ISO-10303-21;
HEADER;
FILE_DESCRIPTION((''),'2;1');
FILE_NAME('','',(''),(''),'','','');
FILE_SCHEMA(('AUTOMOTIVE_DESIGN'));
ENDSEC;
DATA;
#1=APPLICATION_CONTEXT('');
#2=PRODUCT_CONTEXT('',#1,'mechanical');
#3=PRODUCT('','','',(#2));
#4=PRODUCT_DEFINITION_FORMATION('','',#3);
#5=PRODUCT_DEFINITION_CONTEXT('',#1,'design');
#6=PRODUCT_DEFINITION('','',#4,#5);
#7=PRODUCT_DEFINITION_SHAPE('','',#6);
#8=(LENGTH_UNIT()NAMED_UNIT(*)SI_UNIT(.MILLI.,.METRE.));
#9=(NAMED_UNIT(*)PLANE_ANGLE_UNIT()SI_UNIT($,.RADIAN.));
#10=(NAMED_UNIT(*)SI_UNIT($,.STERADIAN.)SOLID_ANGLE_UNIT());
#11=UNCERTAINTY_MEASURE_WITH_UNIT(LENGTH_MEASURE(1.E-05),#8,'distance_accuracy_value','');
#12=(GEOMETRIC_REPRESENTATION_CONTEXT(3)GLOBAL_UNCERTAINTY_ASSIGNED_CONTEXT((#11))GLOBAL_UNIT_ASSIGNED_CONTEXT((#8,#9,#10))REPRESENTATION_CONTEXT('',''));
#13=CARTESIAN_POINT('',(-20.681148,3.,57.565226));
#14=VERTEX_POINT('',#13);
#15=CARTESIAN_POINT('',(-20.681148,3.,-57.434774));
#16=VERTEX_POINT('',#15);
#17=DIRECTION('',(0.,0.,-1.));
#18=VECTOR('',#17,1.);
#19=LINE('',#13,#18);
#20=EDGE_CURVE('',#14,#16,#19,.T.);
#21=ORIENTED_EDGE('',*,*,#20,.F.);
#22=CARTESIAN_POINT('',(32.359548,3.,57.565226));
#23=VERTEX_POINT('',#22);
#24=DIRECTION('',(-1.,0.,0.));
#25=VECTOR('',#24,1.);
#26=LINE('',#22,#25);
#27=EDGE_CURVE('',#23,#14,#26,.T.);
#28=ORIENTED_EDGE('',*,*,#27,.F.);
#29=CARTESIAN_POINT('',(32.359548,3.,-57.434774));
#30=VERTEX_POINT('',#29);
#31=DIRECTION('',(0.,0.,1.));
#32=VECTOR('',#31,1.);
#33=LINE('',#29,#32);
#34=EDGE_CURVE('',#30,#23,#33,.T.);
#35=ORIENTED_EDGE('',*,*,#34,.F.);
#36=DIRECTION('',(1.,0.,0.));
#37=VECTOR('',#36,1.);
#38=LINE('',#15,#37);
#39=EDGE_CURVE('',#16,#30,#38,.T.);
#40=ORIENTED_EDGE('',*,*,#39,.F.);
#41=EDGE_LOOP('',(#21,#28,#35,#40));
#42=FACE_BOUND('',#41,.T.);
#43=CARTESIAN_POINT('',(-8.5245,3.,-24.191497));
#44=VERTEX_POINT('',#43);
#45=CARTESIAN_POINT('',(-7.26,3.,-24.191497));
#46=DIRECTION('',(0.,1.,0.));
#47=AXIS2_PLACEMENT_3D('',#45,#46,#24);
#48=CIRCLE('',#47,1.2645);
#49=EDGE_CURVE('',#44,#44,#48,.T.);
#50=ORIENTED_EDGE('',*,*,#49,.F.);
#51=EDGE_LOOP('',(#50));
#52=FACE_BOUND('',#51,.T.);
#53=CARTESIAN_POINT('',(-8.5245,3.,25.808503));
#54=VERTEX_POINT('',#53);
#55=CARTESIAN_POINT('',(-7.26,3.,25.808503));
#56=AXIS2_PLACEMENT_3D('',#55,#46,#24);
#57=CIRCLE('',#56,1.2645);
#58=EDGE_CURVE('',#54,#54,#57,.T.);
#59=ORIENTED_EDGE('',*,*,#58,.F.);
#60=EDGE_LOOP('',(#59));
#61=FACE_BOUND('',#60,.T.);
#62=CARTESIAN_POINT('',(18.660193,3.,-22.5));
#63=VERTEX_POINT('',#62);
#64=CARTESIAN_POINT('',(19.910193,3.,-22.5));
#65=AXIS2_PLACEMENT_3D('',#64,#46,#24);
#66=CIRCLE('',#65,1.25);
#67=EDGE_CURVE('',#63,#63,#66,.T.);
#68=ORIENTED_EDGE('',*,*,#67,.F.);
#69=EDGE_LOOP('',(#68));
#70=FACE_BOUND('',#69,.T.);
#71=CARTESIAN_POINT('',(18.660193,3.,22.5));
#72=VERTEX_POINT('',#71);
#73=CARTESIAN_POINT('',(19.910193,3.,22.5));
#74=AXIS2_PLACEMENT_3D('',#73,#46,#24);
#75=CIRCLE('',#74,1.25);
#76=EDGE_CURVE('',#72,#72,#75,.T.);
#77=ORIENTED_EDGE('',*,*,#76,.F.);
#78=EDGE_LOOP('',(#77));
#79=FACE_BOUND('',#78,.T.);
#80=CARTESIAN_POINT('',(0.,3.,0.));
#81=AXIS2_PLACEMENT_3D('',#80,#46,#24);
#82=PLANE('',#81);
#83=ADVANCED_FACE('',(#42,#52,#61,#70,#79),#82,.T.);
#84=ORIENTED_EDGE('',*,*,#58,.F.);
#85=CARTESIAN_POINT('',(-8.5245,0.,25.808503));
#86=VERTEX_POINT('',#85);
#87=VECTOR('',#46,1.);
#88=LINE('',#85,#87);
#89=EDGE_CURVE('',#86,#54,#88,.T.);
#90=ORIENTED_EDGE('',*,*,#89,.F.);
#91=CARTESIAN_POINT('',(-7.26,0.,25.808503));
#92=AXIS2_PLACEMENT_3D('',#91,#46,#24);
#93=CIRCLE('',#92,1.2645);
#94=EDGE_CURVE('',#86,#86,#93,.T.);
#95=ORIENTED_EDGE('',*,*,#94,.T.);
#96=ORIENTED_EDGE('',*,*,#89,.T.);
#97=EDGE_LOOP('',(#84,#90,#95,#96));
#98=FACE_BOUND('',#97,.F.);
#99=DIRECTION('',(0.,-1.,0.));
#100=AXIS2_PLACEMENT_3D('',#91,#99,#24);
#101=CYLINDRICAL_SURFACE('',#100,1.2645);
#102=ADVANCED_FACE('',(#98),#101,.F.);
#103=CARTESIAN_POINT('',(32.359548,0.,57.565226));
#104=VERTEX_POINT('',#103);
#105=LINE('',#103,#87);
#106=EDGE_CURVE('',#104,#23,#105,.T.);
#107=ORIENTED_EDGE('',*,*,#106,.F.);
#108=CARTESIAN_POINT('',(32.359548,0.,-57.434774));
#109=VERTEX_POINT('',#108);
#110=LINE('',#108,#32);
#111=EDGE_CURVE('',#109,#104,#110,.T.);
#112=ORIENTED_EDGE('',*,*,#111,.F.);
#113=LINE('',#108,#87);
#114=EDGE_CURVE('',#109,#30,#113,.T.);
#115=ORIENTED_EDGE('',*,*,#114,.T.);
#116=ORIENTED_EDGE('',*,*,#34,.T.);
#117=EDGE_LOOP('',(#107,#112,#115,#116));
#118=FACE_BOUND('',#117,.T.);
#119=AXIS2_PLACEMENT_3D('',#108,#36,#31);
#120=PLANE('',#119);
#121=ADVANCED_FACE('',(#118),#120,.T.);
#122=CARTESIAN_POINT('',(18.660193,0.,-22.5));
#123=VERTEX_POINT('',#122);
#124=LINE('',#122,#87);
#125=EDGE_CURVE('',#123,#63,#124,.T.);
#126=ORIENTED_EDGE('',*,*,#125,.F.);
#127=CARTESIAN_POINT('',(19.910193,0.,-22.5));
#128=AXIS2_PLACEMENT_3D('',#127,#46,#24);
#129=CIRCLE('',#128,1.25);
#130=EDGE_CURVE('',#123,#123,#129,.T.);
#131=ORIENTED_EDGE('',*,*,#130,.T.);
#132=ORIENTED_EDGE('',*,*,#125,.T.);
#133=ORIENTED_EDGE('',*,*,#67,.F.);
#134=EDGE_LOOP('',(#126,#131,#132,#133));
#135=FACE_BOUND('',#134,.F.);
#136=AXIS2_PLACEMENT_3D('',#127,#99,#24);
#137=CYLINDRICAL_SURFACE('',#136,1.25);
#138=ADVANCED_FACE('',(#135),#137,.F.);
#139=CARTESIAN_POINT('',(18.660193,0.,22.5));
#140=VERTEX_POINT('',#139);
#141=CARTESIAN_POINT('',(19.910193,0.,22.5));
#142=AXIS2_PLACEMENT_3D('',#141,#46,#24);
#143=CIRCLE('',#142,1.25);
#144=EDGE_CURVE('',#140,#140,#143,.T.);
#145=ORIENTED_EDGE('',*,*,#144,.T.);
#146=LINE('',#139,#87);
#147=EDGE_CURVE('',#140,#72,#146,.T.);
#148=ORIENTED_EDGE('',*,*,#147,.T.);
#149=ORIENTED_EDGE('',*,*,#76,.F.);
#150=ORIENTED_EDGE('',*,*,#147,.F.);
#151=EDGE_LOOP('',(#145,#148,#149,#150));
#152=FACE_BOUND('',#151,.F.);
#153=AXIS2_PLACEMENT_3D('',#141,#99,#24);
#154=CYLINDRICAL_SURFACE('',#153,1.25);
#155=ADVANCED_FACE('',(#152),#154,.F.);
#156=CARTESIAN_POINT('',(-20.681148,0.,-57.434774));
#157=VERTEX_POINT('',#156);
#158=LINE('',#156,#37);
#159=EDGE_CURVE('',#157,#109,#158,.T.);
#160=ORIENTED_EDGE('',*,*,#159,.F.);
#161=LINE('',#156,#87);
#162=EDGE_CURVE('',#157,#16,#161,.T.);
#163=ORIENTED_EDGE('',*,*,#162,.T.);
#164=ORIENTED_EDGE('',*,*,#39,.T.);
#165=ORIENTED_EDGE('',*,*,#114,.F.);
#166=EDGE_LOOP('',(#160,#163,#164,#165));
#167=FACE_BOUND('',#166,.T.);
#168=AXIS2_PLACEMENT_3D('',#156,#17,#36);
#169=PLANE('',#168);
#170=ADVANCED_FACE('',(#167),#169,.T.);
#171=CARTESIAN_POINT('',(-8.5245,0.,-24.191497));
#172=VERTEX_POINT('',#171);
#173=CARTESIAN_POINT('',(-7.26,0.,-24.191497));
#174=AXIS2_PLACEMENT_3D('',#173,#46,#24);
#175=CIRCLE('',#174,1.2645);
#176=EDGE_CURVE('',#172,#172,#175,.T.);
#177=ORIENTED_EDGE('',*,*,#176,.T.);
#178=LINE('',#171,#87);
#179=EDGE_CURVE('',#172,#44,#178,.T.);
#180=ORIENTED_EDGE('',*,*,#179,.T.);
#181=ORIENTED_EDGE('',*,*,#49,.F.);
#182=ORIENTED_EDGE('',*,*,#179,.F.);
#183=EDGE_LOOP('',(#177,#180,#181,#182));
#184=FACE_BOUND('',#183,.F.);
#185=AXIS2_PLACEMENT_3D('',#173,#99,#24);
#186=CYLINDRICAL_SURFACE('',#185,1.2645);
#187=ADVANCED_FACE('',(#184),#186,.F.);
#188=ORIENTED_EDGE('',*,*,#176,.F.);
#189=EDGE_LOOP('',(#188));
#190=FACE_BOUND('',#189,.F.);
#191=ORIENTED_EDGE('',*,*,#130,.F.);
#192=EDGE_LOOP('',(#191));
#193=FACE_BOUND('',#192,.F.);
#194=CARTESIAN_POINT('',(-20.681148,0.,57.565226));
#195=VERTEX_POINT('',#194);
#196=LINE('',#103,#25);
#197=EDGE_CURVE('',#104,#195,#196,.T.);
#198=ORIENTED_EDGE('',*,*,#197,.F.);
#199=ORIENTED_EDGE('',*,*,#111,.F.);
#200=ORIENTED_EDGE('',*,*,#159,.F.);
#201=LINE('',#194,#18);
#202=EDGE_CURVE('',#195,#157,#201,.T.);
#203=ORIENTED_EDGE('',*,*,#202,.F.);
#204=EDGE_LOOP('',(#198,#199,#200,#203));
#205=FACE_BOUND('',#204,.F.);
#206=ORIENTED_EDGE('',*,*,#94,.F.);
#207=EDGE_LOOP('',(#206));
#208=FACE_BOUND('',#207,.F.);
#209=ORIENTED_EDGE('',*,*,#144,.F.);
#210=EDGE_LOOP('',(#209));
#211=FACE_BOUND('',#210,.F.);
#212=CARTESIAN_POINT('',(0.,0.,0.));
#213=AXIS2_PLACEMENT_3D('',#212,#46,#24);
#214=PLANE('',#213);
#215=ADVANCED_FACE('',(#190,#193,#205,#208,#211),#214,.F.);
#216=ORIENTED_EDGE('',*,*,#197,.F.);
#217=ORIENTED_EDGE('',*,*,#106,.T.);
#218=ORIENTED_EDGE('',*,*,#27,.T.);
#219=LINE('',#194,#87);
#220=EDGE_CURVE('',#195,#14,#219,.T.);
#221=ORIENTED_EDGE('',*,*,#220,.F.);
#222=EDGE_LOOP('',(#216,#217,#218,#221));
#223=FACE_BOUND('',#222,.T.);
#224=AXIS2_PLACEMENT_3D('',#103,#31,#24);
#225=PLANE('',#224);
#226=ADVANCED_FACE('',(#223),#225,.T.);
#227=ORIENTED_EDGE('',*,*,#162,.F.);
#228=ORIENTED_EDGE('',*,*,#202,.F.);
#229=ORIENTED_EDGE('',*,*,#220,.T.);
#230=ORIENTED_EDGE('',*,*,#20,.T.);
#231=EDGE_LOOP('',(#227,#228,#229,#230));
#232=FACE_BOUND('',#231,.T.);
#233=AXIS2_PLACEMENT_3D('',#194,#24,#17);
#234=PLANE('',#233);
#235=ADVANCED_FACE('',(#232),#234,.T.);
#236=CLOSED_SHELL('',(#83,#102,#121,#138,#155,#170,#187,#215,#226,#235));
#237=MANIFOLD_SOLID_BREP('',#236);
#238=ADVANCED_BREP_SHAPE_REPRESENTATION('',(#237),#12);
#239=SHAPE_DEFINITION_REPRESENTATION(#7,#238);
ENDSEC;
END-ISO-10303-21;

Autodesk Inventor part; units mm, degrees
ref_plane "YZ Plane" through (0, 0, 0) normal (1, 0, 0) x (0, 1, 0)
ref_plane "XZ Plane" through (0, 0, 0) normal (0, 1, 0) x (-1, 0, 0)
ref_plane "XY Plane" through (0, 0, 0) normal (0, 0, 1) x (1, 0, 0)
sketch "Sketch1" plane through (0, 0, 0) normal (0, 1, 0) x (-1, 0, 0)
  spline S0 degree 3 poles (-32.404854, -32.853236) (-32.408213, -32.73595) (-32.409911, -32.618547) (-32.409934, -32.501343) (-32.409955, -32.397684) (-32.409974, -32.293904) (-32.409993, -32.190169) (-32.410033, -31.969146) (-32.41007, -31.748122) (-32.410103, -31.527098) (-32.41017, -31.085051) (-32.410223, -30.643004) (-32.410266, -30.200957) (-32.410352, -29.316862) (-32.410395, -28.432768) (-32.410416, -27.548673) (-32.410444, -26.388246) (-32.410435, -25.228046) (-32.410446, -24.067555) (-32.410451, -23.45976) (-32.410462, -22.851867) (-32.410477, -22.244105) (-32.410527, -20.157589) (-32.410619, -18.070753) (-32.410664, -15.984323) (-32.410696, -14.53452) (-32.410704, -13.084832) (-32.410706, -11.63497) (-32.410708, -10.42824) (-32.410705, -9.226696) (-32.410708, -8.025862) (-32.410715, -5.363664) (-32.410749, -2.704993) (-32.410749, 0) (-32.410749, 2.70077) (-32.410715, 5.359553) (-32.410708, 8.025862) (-32.410707, 8.544603) (-32.410707, 9.06363) (-32.410707, 9.583301) (-32.410707, 11.716216) (-32.41071, 13.850051) (-32.410664, 15.984323) (-32.410606, 18.679415) (-32.41047, 21.375766) (-32.410446, 24.067555) (-32.410425, 26.312694) (-32.410471, 28.55511) (-32.410201, 30.801569) (-32.410148, 31.243615) (-32.410083, 31.685661) (-32.410004, 32.127707) (-32.409982, 32.252247) (-32.409959, 32.376902) (-32.409934, 32.501343) (-32.409915, 32.59775) (-32.408764, 32.694267) (-32.406487, 32.790697) (-32.401273, 33.0116) (-32.390165, 33.232367) (-32.373199, 33.452997) (-32.339266, 33.894259) (-32.28153, 34.337158) (-32.200857, 34.773898) (-32.120183, 35.210638) (-32.017096, 35.639812) (-31.892023, 36.061563) (-31.803491, 36.360098) (-31.703903, 36.654969) (-31.593121, 36.94617) (-31.39089, 37.477752) (-31.151562, 37.997105) (-30.875182, 38.502046) (-30.760914, 38.710811) (-30.641216, 38.915391) (-30.516203, 39.115805) (-30.173207, 39.665673) (-29.790661, 40.184302) (-29.36895, 40.672553) (-29.245622, 40.81534) (-29.118935, 40.95548) (-28.988811, 41.092954) (-28.815373, 41.276189) (-28.635833, 41.454691) (-28.450153, 41.628366) (-28.125165, 41.932343) (-27.784487, 42.218481) (-27.432415, 42.483881) (-27.308772, 42.577086) (-27.18357, 42.667861) (-27.056809, 42.756201) (-26.46167, 43.170951) (-25.83254, 43.532746) (-25.16884, 43.840615) (-25.051477, 43.895056) (-24.933051, 43.94777) (-24.813786, 43.998631) (-24.523994, 44.122212) (-24.22923, 44.2348) (-23.933007, 44.33546) (-23.514871, 44.477546) (-23.091358, 44.596955) (-22.662502, 44.693838) (-22.570374, 44.714651) (-22.477996, 44.734419) (-22.38537, 44.753136) (-22.046825, 44.821544) (-21.70496, 44.875937) (-21.359741, 44.916201) (-20.920071, 44.967482) (-20.473811, 44.995783) (-20.027865, 45) knots 0 0 0 0 0.00414579 0.00414579 0.00414579 0.0078125 0.0078125 0.0078125 0.015625 0.015625 0.015625 0.03125 0.03125 0.03125 0.0625 0.0625 0.0625 0.1035175 0.1035175 0.1035175 0.125 0.125 0.125 0.19875187 0.19875187 0.19875187 0.25 0.25 0.25 0.29265414 0.29265414 0.29265414 0.38721651 0.38721651 0.38721651 0.48163124 0.48163124 0.48163124 0.5 0.5 0.5 0.57539191 0.57539191 0.57539191 0.67059447 0.67059447 0.67059447 0.75 0.75 0.75 0.765625 0.765625 0.765625 0.77002712 0.77002712 0.77002712 0.7734375 0.7734375 0.7734375 0.78125 0.78125 0.78125 0.796875 0.796875 0.796875 0.8125 0.8125 0.8125 0.82356007 0.82356007 0.82356007 0.84375 0.84375 0.84375 0.85209742 0.85209742 0.85209742 0.875 0.875 0.875 0.88169776 0.88169776 0.88169776 0.890625 0.890625 0.890625 0.90625 0.90625 0.90625 0.91173731 0.91173731 0.91173731 0.9375 0.9375 0.9375 0.94205566 0.94205566 0.94205566 0.953125 0.953125 0.953125 0.96875 0.96875 0.96875 0.97210662 0.97210662 0.97210662 0.984375 0.984375 0.984375 1 1 1 1
  spline S1 degree 3 poles (-28.410193, 32.5) (-28.410193, 33.765572) (-28.133676, 34.931308) (-27.671254, 35.965522) (-27.208832, 36.999736) (-26.560504, 37.902428) (-25.780808, 38.647111) (-25.001113, 39.391795) (-24.090049, 39.97847) (-23.095481, 40.380521) (-22.100912, 40.782573) (-21.02284, 41) (-19.910193, 41) (-18.797545, 41) (-17.719473, 40.782573) (-16.724904, 40.380521) (-15.730336, 39.97847) (-14.819272, 39.391795) (-14.039577, 38.647111) (-13.259881, 37.902428) (-12.611553, 36.999736) (-12.149131, 35.965522) (-11.686709, 34.931308) (-11.410193, 33.765572) (-11.410193, 32.5) knots 0 0 0 0 0.125 0.125 0.125 0.25 0.25 0.25 0.375 0.375 0.375 0.5 0.5 0.5 0.625 0.625 0.625 0.75 0.75 0.75 0.875 0.875 0.875 1 1 1 1
  line L0 (-28.410193, -32.5) -> (-28.410193, 32.5)
  line L1 (-11.410193, 32.5) -> (-11.410193, -9.130692)
  line L2 (-11.410193, -9.130692) -> (-11.410193, -32.5)
  spline S2 degree 3 poles (-11.92122, -35.403236) (-11.99101, -35.594681) (-12.067149, -35.782168) (-12.149131, -35.965522) (-12.611553, -36.999736) (-13.259881, -37.902428) (-14.039577, -38.647111) (-14.819272, -39.391795) (-15.730336, -39.97847) (-16.724904, -40.380521) (-17.719473, -40.782573) (-18.797545, -41) (-19.910193, -41) (-21.02284, -41) (-22.100912, -40.782573) (-23.095481, -40.380521) (-24.090049, -39.97847) (-25.001113, -39.391795) (-25.780808, -38.647111) (-26.560504, -37.902428) (-27.208832, -36.999736) (-27.671254, -35.965522) (-27.753236, -35.782168) (-27.829375, -35.594681) (-27.899165, -35.403236) knots 0.102839 0.102839 0.102839 0.102839 0.125 0.125 0.125 0.25 0.25 0.25 0.375 0.375 0.375 0.5 0.5 0.5 0.625 0.625 0.625 0.75 0.75 0.75 0.875 0.875 0.875 0.897161 0.897161 0.897161 0.897161
  ellipse E0 centre (-27.409985, -30.903735) end of major axis (-43.224744, -27.538991) minor radius 11.659046 (-11.885471, -35.303236) -> (-11.410193, -32.5) ccw
  ellipse E1 centre (-12.410416, -30.903738) end of major axis (-28.225158, -34.268479) minor radius 11.659041 (-28.410193, -32.5) -> (-27.934914, -35.303236) ccw
  spline S3 degree 3 poles (-20.135916, -44.926171) (-20.902232, -44.912188) (-21.656156, -44.828474) (-22.39639, -44.67772) (-22.948546, -44.56527) (-23.493405, -44.415278) (-24.031365, -44.226793) (-24.310103, -44.129132) (-24.58603, -44.021306) (-24.856048, -43.904514) (-24.890974, -43.889408) (-24.925802, -43.874152) (-24.960525, -43.858751) (-25.263696, -43.724284) (-25.560172, -43.578241) (-25.850131, -43.420931) (-26.291576, -43.181437) (-26.717955, -42.915946) (-27.128881, -42.623661) (-27.257781, -42.531977) (-27.385148, -42.437641) (-27.510974, -42.340653) (-27.774451, -42.137563) (-28.031837, -41.922148) (-28.278086, -41.698847) (-28.524335, -41.475546) (-28.760531, -41.243618) (-28.986777, -41.003148) (-29.015281, -40.972852) (-29.043627, -40.942419) (-29.071813, -40.911851) (-29.491074, -40.457166) (-29.875526, -39.972573) (-30.22442, -39.457475) (-30.348377, -39.274468) (-30.468123, -39.087073) (-30.582688, -38.896485) (-30.640191, -38.800823) (-30.696393, -38.704359) (-30.751212, -38.60729) (-30.915247, -38.316831) (-31.066945, -38.021018) (-31.206902, -37.720112) (-31.358831, -37.393466) (-31.497133, -37.060343) (-31.621381, -36.721723) (-31.726048, -36.436468) (-31.82072, -36.147348) (-31.905041, -35.853236) knots 0 0 0 0 0.14319106 0.14319106 0.14319106 0.25 0.25 0.25 0.30534172 0.30534172 0.30534172 0.3125 0.3125 0.3125 0.375 0.375 0.375 0.47015259 0.47015259 0.47015259 0.5 0.5 0.5 0.5625 0.5625 0.5625 0.625 0.625 0.625 0.63287425 0.63287425 0.63287425 0.75 0.75 0.75 0.7916132 0.7916132 0.7916132 0.8125 0.8125 0.8125 0.875 0.875 0.875 0.94284614 0.94284614 0.94284614 1 1 1 1
  ellipse E2 centre (-27.409985, -30.903735) end of major axis (-43.224744, -27.538991) minor radius 11.659046 (-11.885471, -35.303236) -> (-11.410193, -32.5) ccw
  line L3 (-11.410193, -9.130692) -> (-11.410193, -32.5)
  line L4 (-11.410193, 32.5) -> (-11.410193, -9.130692)
  spline S4 degree 3 poles (-28.410193, 32.5) (-28.410193, 33.765572) (-28.133677, 34.931308) (-27.671254, 35.965522) (-27.208832, 36.999736) (-26.560504, 37.902428) (-25.780809, 38.647111) (-25.001113, 39.391795) (-24.090049, 39.97847) (-23.095481, 40.380521) (-22.100913, 40.782573) (-21.02284, 41) (-19.910193, 41) (-18.797545, 41) (-17.719473, 40.782573) (-16.724904, 40.380521) (-15.730336, 39.97847) (-14.819273, 39.391795) (-14.039577, 38.647111) (-13.259881, 37.902428) (-12.611553, 36.999736) (-12.149131, 35.965522) (-11.686709, 34.931308) (-11.410193, 33.765572) (-11.410193, 32.5) knots 0 0 0 0 0.125 0.125 0.125 0.25 0.25 0.25 0.375 0.375 0.375 0.5 0.5 0.5 0.625 0.625 0.625 0.75 0.75 0.75 0.875 0.875 0.875 1 1 1 1
  line L5 (-28.410193, -32.5) -> (-28.410193, 32.5)
  ellipse E3 centre (-12.410416, -30.903738) end of major axis (-28.225158, -34.268479) minor radius 11.659041 (-28.410193, -32.5) -> (-27.934914, -35.303236) ccw
  circle A0 centre (-19.910193, 22.5) radius 1.25
  circle A1 centre (-19.910193, -22.5) radius 1.25
  spline S5 degree 3 poles (-7.409638, -8.902626) (-7.409642, -11.263271) (-7.409635, -13.623588) (-7.409688, -15.984285) (-7.409726, -17.615445) (-7.409792, -19.246809) (-7.409843, -20.877933) (-7.409877, -21.941017) (-7.409905, -23.004462) (-7.409916, -24.06752) (-7.409926, -25.000298) (-7.409923, -25.932787) (-7.409937, -26.865587) (-7.409952, -27.863529) (-7.409987, -28.861472) (-7.410072, -29.859414) (-7.410115, -30.358385) (-7.410171, -30.857356) (-7.410243, -31.356327) (-7.410279, -31.605813) (-7.410319, -31.855298) (-7.410363, -32.104784) (-7.410387, -32.236971) (-7.410411, -32.369257) (-7.410437, -32.501339) (-7.410461, -32.618544) (-7.412158, -32.735941) (-7.415518, -32.853236) knots 0 0 0 0 0.29568906 0.29568906 0.29568906 0.5 0.5 0.5 0.6331595 0.6331595 0.6331595 0.75 0.75 0.75 0.875 0.875 0.875 0.9375 0.9375 0.9375 0.96875 0.96875 0.96875 0.98530746 0.98530746 0.98530746 1 1 1 1
  spline S6 degree 3 poles (-7.409638, -8.902626) (-7.398668, -9.006825) (-9.14047, -8.698904) (-11.410193, -9.130692) knots 0 0 0 0 1 1 1 1
  line L6 (-11.410193, -9.130692) -> (-11.410193, -32.5)
  ellipse E4 centre (-27.409985, -30.903735) end of major axis (-43.224744, -27.538991) minor radius 11.659046 (-11.885471, -35.303236) -> (-11.410193, -32.5) ccw
  line L7 (-11.885471, -35.303236) -> (-7.757702, -35.303236)
  spline S7 degree 3 poles (-7.757702, -35.303236) (-7.758844, -35.303236) (-7.761073, -35.30773) (-7.767821, -35.325968) (-7.772438, -35.340145) (-7.78659, -35.386369) (-7.797308, -35.423345) (-7.823066, -35.51376) (-7.838041, -35.566981) (-7.866767, -35.668696) (-7.879817, -35.714794) (-7.897842, -35.778081) (-7.902464, -35.794277) (-7.90927, -35.818079) (-7.911434, -35.825641) (-7.915514, -35.839882) (-7.917428, -35.846559) (-7.919345, -35.853236) knots 0 0 0 0 0.13804482 0.13804482 0.28388387 0.28388387 0.50004609 0.50004609 0.72328448 0.72328448 0.89210226 0.89210226 0.94966157 0.94966157 0.97641027 0.97641027 1 1 1 1
  spline S8 degree 3 poles (-7.919345, -35.853236) (-8.003152, -36.145286) (-8.097043, -36.431979) (-8.200582, -36.714498) (-8.328208, -37.062745) (-8.47045, -37.404583) (-8.626747, -37.739075) (-8.810346, -38.131998) (-9.013716, -38.515699) (-9.237855, -38.889015) (-9.35932, -39.09132) (-9.486915, -39.290583) (-9.620818, -39.486955) (-9.811316, -39.766324) (-10.014117, -40.038912) (-10.225707, -40.300477) (-10.393712, -40.508163) (-10.567792, -40.709695) (-10.747887, -40.905165) (-10.794607, -40.955875) (-10.841734, -41.006176) (-10.889261, -41.056069) (-11.350717, -41.540498) (-11.849576, -41.987112) (-12.386918, -42.394816) (-12.486805, -42.470605) (-12.588167, -42.545124) (-12.690734, -42.618124) (-12.864047, -42.741476) (-13.040808, -42.860477) (-13.219487, -42.974259) (-13.503909, -43.155378) (-13.7942, -43.324035) (-14.090213, -43.480544) (-14.376118, -43.631709) (-14.667362, -43.771537) (-14.964004, -43.8999) (-15.281618, -44.037338) (-15.605429, -44.161639) (-15.935451, -44.272737) (-16.254577, -44.380167) (-16.581053, -44.475594) (-16.9089, -44.557066) (-17.080253, -44.599649) (-17.251997, -44.638463) (-17.424125, -44.673526) (-17.581326, -44.705549) (-17.738847, -44.734442) (-17.896686, -44.760264) (-18.558021, -44.868455) (-19.224843, -44.923373) (-19.897251, -44.924079) (-19.901566, -44.924083) (-19.90588, -44.924086) (-19.910193, -44.924086) (-20.241963, -44.924086) (-20.576611, -44.910627) (-20.909693, -44.883796) (-21.247106, -44.856615) (-21.5813, -44.815961) (-21.912343, -44.762119) (-22.074408, -44.73576) (-22.235717, -44.706233) (-22.39627, -44.673528) (-22.891627, -44.572622) (-23.379775, -44.441685) (-23.860799, -44.280846) (-24.196316, -44.16866) (-24.529506, -44.041364) (-24.856421, -43.899904) (-25.150109, -43.772821) (-25.438729, -43.634322) (-25.719775, -43.486069) (-26.209658, -43.227655) (-26.679695, -42.938431) (-27.129738, -42.618131) (-27.225287, -42.550128) (-27.319927, -42.480713) (-27.41366, -42.409893) (-27.948886, -42.0055) (-28.458682, -41.551215) (-28.922894, -41.064862) (-28.973321, -41.01203) (-29.02324, -40.9588) (-29.072649, -40.905176) (-29.478082, -40.465148) (-29.849491, -39.998649) (-30.186959, -39.505722) (-30.324635, -39.304624) (-30.456615, -39.099116) (-30.58276, -38.889029) (-30.630057, -38.810259) (-30.676532, -38.730845) (-30.722184, -38.6508) (-30.889595, -38.357265) (-31.045877, -38.05518) (-31.189193, -37.749189) (-31.347794, -37.410564) (-31.491558, -37.065293) (-31.620128, -36.714515) (-31.723916, -36.431349) (-31.817776, -36.144633) (-31.901409, -35.853236) knots 0 0 0 0 0.02799367 0.02799367 0.02799367 0.0625 0.0625 0.0625 0.10303401 0.10303401 0.10303401 0.125 0.125 0.125 0.15625 0.15625 0.15625 0.18106293 0.18106293 0.18106293 0.1875 0.1875 0.1875 0.25 0.25 0.25 0.26161819 0.26161819 0.26161819 0.28125 0.28125 0.28125 0.3125 0.3125 0.3125 0.34268303 0.34268303 0.34268303 0.375 0.375 0.375 0.40625 0.40625 0.40625 0.42258324 0.42258324 0.42258324 0.4375 0.4375 0.4375 0.5 0.5 0.5 0.50040103 0.50040103 0.50040103 0.53125 0.53125 0.53125 0.5625 0.5625 0.5625 0.57779868 0.57779868 0.57779868 0.625 0.625 0.625 0.65792316 0.65792316 0.65792316 0.6875 0.6875 0.6875 0.7390545 0.7390545 0.7390545 0.75 0.75 0.75 0.8125 0.8125 0.8125 0.81928929 0.81928929 0.81928929 0.875 0.875 0.875 0.89772826 0.89772826 0.89772826 0.90625 0.90625 0.90625 0.9375 0.9375 0.9375 0.97208291 0.97208291 0.97208291 1 1 1 1
  spline S9 degree 3 poles (-31.901409, -35.853236) (-31.903324, -35.846565) (-31.905236, -35.839895) (-31.909312, -35.82567) (-31.911474, -35.818117) (-31.918271, -35.79435) (-31.922886, -35.778181) (-31.940872, -35.715036) (-31.953892, -35.669047) (-31.982604, -35.567376) (-31.997591, -35.514102) (-32.023361, -35.423609) (-32.034081, -35.386601) (-32.048248, -35.340272) (-32.052873, -35.326045) (-32.05963, -35.307745) (-32.061857, -35.303236) (-32.062995, -35.303236) knots 0 0 0 0 0.02356692 0.02356692 0.05028405 0.05028405 0.10774901 0.10774901 0.27614786 0.27614786 0.49948807 0.49948807 0.71561552 0.71561552 0.86172473 0.86172473 1 1 1 1
  line L8 (-32.062995, -35.303236) -> (-27.934914, -35.303236)
  ellipse E5 centre (-12.410416, -30.903738) end of major axis (-28.225158, -34.268479) minor radius 11.659041 (-28.410193, -32.5) -> (-27.934914, -35.303236) ccw
  line L9 (-28.410193, -32.5) -> (-28.410193, 32.5)
  spline S10 degree 3 poles (-28.410193, 32.5) (-28.410193, 33.765572) (-28.133676, 34.931308) (-27.671254, 35.965522) (-27.208832, 36.999736) (-26.560504, 37.902428) (-25.780808, 38.647111) (-25.001113, 39.391795) (-24.090049, 39.97847) (-23.095481, 40.380521) (-22.100912, 40.782573) (-21.02284, 41) (-19.910193, 41) (-18.797545, 41) (-17.719473, 40.782573) (-16.724904, 40.380521) (-15.730336, 39.97847) (-14.819272, 39.391795) (-14.039577, 38.647111) (-13.259881, 37.902428) (-12.611553, 36.999736) (-12.149131, 35.965522) (-11.686709, 34.931308) (-11.410193, 33.765572) (-11.410193, 32.5) knots 0 0 0 0 0.125 0.125 0.125 0.25 0.25 0.25 0.375 0.375 0.375 0.5 0.5 0.5 0.625 0.625 0.625 0.75 0.75 0.75 0.875 0.875 0.875 1 1 1 1
  line L10 (-11.410193, 32.5) -> (-11.410193, -9.130692)
  spline S11 degree 3 poles (-7.409638, -8.902626) (-7.408932, -8.899194) (-7.41554, -8.881327) (-7.442844, -8.816766) (-7.463738, -8.769717) (-7.536437, -8.603714) (-7.599257, -8.458754) (-7.724577, -8.122213) (-7.786434, -7.935427) (-7.879306, -7.556662) (-7.913159, -7.371174) (-7.937278, -7.119769) (-7.941464, -7.06115) (-7.945382, -6.9757) (-7.946297, -6.949166) (-7.947438, -6.899489) (-7.947739, -6.876366) (-7.947807, -6.853236) knots 0 0 0 0 0.13056971 0.13056971 0.2645065 0.2645065 0.49982844 0.49982844 0.71627112 0.71627112 0.89885892 0.89885892 0.95382194 0.95382194 0.9785172 0.9785172 1 1 1 1
  spline S12 degree 3 poles (-7.947807, -6.853236) (-7.954633, -4.568884) (-7.957468, -2.286953) (-7.957468, 0) (-7.957468, 2.385018) (-7.954386, 4.76446) (-7.946908, 7.146764) knots 0 0 0 0 0.48950496 0.48950496 0.48950496 1 1 1 1
  spline S13 degree 3 poles (-7.946908, 7.146764) (-7.946835, 7.169899) (-7.946531, 7.193028) (-7.945383, 7.242716) (-7.944465, 7.269255) (-7.940538, 7.354723) (-7.936347, 7.413355) (-7.912212, 7.66482) (-7.878365, 7.850357) (-7.785562, 8.229172) (-7.723783, 8.415967) (-7.598689, 8.752471) (-7.536024, 8.897388) (-7.46354, 9.063319) (-7.442718, 9.110341) (-7.415511, 9.174866) (-7.408931, 9.192724) (-7.409638, 9.196154) knots 0 0 0 0 0.02148885 0.02148885 0.04619107 0.04619107 0.10116958 0.10116958 0.28381522 0.28381522 0.50028176 0.50028176 0.73556793 0.73556793 0.86946283 0.86946283 1 1 1 1
  ellipse E6 centre (-19.910191, 45) end of major axis (-20.032475, 45) minor radius 0 (-20.027865, 45) -> (-19.792521, 45) ccw
  spline S14 degree 3 poles (-32.404854, -32.853236) (-32.408213, -32.73595) (-32.409911, -32.618547) (-32.409934, -32.501343) (-32.409955, -32.397684) (-32.409974, -32.293904) (-32.409993, -32.190169) (-32.410033, -31.969146) (-32.41007, -31.748122) (-32.410103, -31.527098) (-32.41017, -31.085051) (-32.410223, -30.643004) (-32.410266, -30.200957) (-32.410352, -29.316862) (-32.410395, -28.432768) (-32.410416, -27.548673) (-32.410444, -26.388246) (-32.410435, -25.228046) (-32.410446, -24.067555) (-32.410451, -23.45976) (-32.410462, -22.851867) (-32.410477, -22.244105) (-32.410527, -20.157589) (-32.410619, -18.070753) (-32.410664, -15.984323) (-32.410696, -14.53452) (-32.410704, -13.084832) (-32.410706, -11.63497) (-32.410708, -10.42824) (-32.410705, -9.226696) (-32.410708, -8.025862) (-32.410715, -5.363664) (-32.410749, -2.704993) (-32.410749, 0) (-32.410749, 2.70077) (-32.410715, 5.359553) (-32.410708, 8.025862) (-32.410707, 8.544603) (-32.410707, 9.06363) (-32.410707, 9.583301) (-32.410707, 11.716216) (-32.41071, 13.850051) (-32.410664, 15.984323) (-32.410606, 18.679415) (-32.41047, 21.375766) (-32.410446, 24.067555) (-32.410425, 26.312694) (-32.410471, 28.55511) (-32.410201, 30.801569) (-32.410148, 31.243615) (-32.410083, 31.685661) (-32.410004, 32.127707) (-32.409982, 32.252247) (-32.409959, 32.376902) (-32.409934, 32.501343) (-32.409915, 32.59775) (-32.408764, 32.694267) (-32.406487, 32.790697) (-32.401273, 33.0116) (-32.390165, 33.232367) (-32.373199, 33.452997) (-32.339266, 33.894259) (-32.28153, 34.337158) (-32.200857, 34.773898) (-32.120183, 35.210638) (-32.017096, 35.639812) (-31.892023, 36.061563) (-31.803491, 36.360098) (-31.703903, 36.654969) (-31.593121, 36.94617) (-31.39089, 37.477752) (-31.151562, 37.997105) (-30.875182, 38.502046) (-30.760914, 38.710811) (-30.641216, 38.915391) (-30.516203, 39.115805) (-30.173207, 39.665673) (-29.790661, 40.184302) (-29.36895, 40.672553) (-29.245622, 40.81534) (-29.118935, 40.95548) (-28.988811, 41.092954) (-28.815373, 41.276189) (-28.635833, 41.454691) (-28.450153, 41.628366) (-28.125165, 41.932343) (-27.784487, 42.218481) (-27.432415, 42.483881) (-27.308772, 42.577086) (-27.18357, 42.667861) (-27.056809, 42.756201) (-26.46167, 43.170951) (-25.83254, 43.532746) (-25.16884, 43.840615) (-25.051477, 43.895056) (-24.933051, 43.94777) (-24.813786, 43.998631) (-24.523994, 44.122212) (-24.22923, 44.2348) (-23.933007, 44.33546) (-23.514871, 44.477546) (-23.091358, 44.596955) (-22.662502, 44.693838) (-22.570374, 44.714651) (-22.477996, 44.734419) (-22.38537, 44.753136) (-22.046825, 44.821544) (-21.70496, 44.875937) (-21.359741, 44.916201) (-20.920071, 44.967482) (-20.473811, 44.995783) (-20.027865, 45) knots 0 0 0 0 0.00414579 0.00414579 0.00414579 0.0078125 0.0078125 0.0078125 0.015625 0.015625 0.015625 0.03125 0.03125 0.03125 0.0625 0.0625 0.0625 0.1035175 0.1035175 0.1035175 0.125 0.125 0.125 0.19875187 0.19875187 0.19875187 0.25 0.25 0.25 0.29265414 0.29265414 0.29265414 0.38721651 0.38721651 0.38721651 0.48163124 0.48163124 0.48163124 0.5 0.5 0.5 0.57539191 0.57539191 0.57539191 0.67059447 0.67059447 0.67059447 0.75 0.75 0.75 0.765625 0.765625 0.765625 0.77002712 0.77002712 0.77002712 0.7734375 0.7734375 0.7734375 0.78125 0.78125 0.78125 0.796875 0.796875 0.796875 0.8125 0.8125 0.8125 0.82356007 0.82356007 0.82356007 0.84375 0.84375 0.84375 0.85209742 0.85209742 0.85209742 0.875 0.875 0.875 0.88169776 0.88169776 0.88169776 0.890625 0.890625 0.890625 0.90625 0.90625 0.90625 0.91173731 0.91173731 0.91173731 0.9375 0.9375 0.9375 0.94205566 0.94205566 0.94205566 0.953125 0.953125 0.953125 0.96875 0.96875 0.96875 0.97210662 0.97210662 0.97210662 0.984375 0.984375 0.984375 1 1 1 1
  spline S15 degree 3 poles (-32.326118, -33.903236) (-32.327007, -33.903236) (-32.328715, -33.895) (-32.333743, -33.861541) (-32.337123, -33.835589) (-32.347083, -33.749915) (-32.354346, -33.680402) (-32.369383, -33.51231) (-32.377025, -33.415241) (-32.389523, -33.2211) (-32.394565, -33.12798) (-32.399896, -33.000336) (-32.401115, -32.968405) (-32.402735, -32.921618) (-32.403222, -32.906877) (-32.404093, -32.879166) (-32.404483, -32.866202) (-32.404854, -32.853236) knots 0 0 0 0 0.13773636 0.13773636 0.28245528 0.28245528 0.4998262 0.4998262 0.71460149 0.71460149 0.89132086 0.89132086 0.94969153 0.94969153 0.97647884 0.97647884 1 1 1 1
  line L11 (-32.275001, -33.903236) -> (-32.326118, -33.903236)
  spline S16 degree 3 poles (-32.082303, -34.853236) (-32.084676, -34.841371) (-32.087042, -34.829506) (-32.09207, -34.804213) (-32.094728, -34.790789) (-32.103063, -34.748561) (-32.108688, -34.719844) (-32.130326, -34.608554) (-32.145652, -34.527896) (-32.178504, -34.352726) (-32.195119, -34.262366) (-32.224113, -34.107828) (-32.236352, -34.04447) (-32.25334, -33.965771) (-32.25917, -33.941768) (-32.268606, -33.91085) (-32.272281, -33.903236) (-32.275001, -33.903236) knots 0 0 0 0 0.02405151 0.02405151 0.0512956 0.0512956 0.10987642 0.10987642 0.27988487 0.27988487 0.49965886 0.49965886 0.71628377 0.71628377 0.86179308 0.86179308 1 1 1 1
  spline S17 degree 3 poles (-20.17139, -44.853236) (-20.878029, -44.838222) (-21.573226, -44.763643) (-22.257416, -44.631762) (-22.301762, -44.623215) (-22.346062, -44.614422) (-22.390317, -44.605384) (-23.028853, -44.474979) (-23.65793, -44.294096) (-24.276424, -44.061427) (-24.47081, -43.988301) (-24.66254, -43.910608) (-24.851638, -43.828396) (-25.305911, -43.630899) (-25.745054, -43.407502) (-26.16963, -43.159057) (-26.497285, -42.967327) (-26.816345, -42.760565) (-27.126353, -42.538413) (-27.385274, -42.35287) (-27.637877, -42.156573) (-27.883918, -41.949598) (-28.305343, -41.595087) (-28.698989, -41.216742) (-29.065485, -40.815445) (-29.16915, -40.701936) (-29.270623, -40.586577) (-29.369939, -40.469336) (-29.811526, -39.948054) (-30.211115, -39.389501) (-30.564084, -38.794047) (-30.571157, -38.782114) (-30.578212, -38.770167) (-30.585247, -38.758206) (-30.943356, -38.149318) (-31.244219, -37.518322) (-31.494339, -36.86773) (-31.525136, -36.787624) (-31.555162, -36.707173) (-31.584396, -36.626428) (-31.792589, -36.051387) (-31.960654, -35.461445) (-32.082303, -34.853236) knots 0 0 0 0 0.125 0.125 0.125 0.13310181 0.13310181 0.13310181 0.25 0.25 0.25 0.28673977 0.28673977 0.28673977 0.375 0.375 0.375 0.44311226 0.44311226 0.44311226 0.5 0.5 0.5 0.5974389 0.5974389 0.5974389 0.625 0.625 0.625 0.74754435 0.74754435 0.74754435 0.75 0.75 0.75 0.875 0.875 0.875 0.89039091 0.89039091 0.89039091 1 1 1 1
  line L12 (-20.17139, -44.853236) -> (-19.649008, -44.853236)
  spline S18 degree 3 poles (-7.738713, -34.853236) (-7.860311, -35.461404) (-8.028327, -36.051343) (-8.236488, -36.626409) (-8.265735, -36.707207) (-8.295776, -36.787711) (-8.326589, -36.867869) (-8.576705, -37.518543) (-8.877592, -38.149652) (-9.235782, -38.758677) (-9.242721, -38.770476) (-9.249678, -38.78226) (-9.256654, -38.79403) (-9.609761, -39.389781) (-10.009148, -39.948038) (-10.450617, -40.469231) (-10.549953, -40.586506) (-10.651446, -40.701897) (-10.755129, -40.815433) (-11.121335, -41.21644) (-11.514619, -41.594489) (-11.935591, -41.948716) (-12.181737, -42.155836) (-12.434737, -42.352496) (-12.69416, -42.538407) (-13.004032, -42.760472) (-13.323062, -42.967221) (-13.650378, -43.158779) (-14.075179, -43.40739) (-14.514473, -43.63087) (-14.9688, -43.828397) (-15.15761, -43.910486) (-15.349026, -43.988062) (-15.543071, -44.06108) (-16.161281, -44.293705) (-16.791217, -44.474918) (-17.430074, -44.605391) (-17.47426, -44.614415) (-17.518489, -44.623194) (-17.562759, -44.631729) (-18.247107, -44.763656) (-18.942379, -44.838234) (-19.649008, -44.853236) knots 0 0 0 0 0.10960083 0.10960083 0.10960083 0.125 0.125 0.125 0.25 0.25 0.25 0.25242164 0.25242164 0.25242164 0.375 0.375 0.375 0.4025818 0.4025818 0.4025818 0.5 0.5 0.5 0.55696145 0.55696145 0.55696145 0.625 0.625 0.625 0.71330281 0.71330281 0.71330281 0.75 0.75 0.75 0.86691377 0.86691377 0.86691377 0.875 0.875 0.875 1 1 1 1
  spline S19 degree 3 poles (-7.545928, -33.903236) (-7.548655, -33.903236) (-7.552333, -33.910824) (-7.561767, -33.941634) (-7.567592, -33.965551) (-7.584574, -34.044068) (-7.596815, -34.10737) (-7.625801, -34.261778) (-7.642403, -34.352049) (-7.675265, -34.527294) (-7.690621, -34.608135) (-7.712301, -34.719667) (-7.717932, -34.748431) (-7.726277, -34.790723) (-7.728938, -34.804162) (-7.733969, -34.829483) (-7.736337, -34.84136) (-7.738713, -34.853236) knots 0 0 0 0 0.13797105 0.13797105 0.28320611 0.28320611 0.49987241 0.49987241 0.71955484 0.71955484 0.88997298 0.88997298 0.94864929 0.94864929 0.97592532 0.97592532 1 1 1 1
  line L13 (-7.494451, -33.903236) -> (-7.545928, -33.903236)
  spline S20 degree 3 poles (-7.415518, -32.853236) (-7.415889, -32.866192) (-7.416279, -32.879146) (-7.417149, -32.906834) (-7.417636, -32.921561) (-7.419255, -32.968293) (-7.420473, -33.000185) (-7.425797, -33.127573) (-7.43083, -33.220493) (-7.443328, -33.414553) (-7.450985, -33.51171) (-7.466057, -33.679936) (-7.47334, -33.749507) (-7.483349, -33.835367) (-7.486752, -33.861406) (-7.491821, -33.894974) (-7.493547, -33.903236) (-7.494451, -33.903236) knots 0 0 0 0 0.02350348 0.02350348 0.05026558 0.05026558 0.10856122 0.10856122 0.28487722 0.28487722 0.49973499 0.49973499 0.71707093 0.71707093 0.86204486 0.86204486 1 1 1 1
  circle A2 centre (7.26, 25.808503) radius 1.2645
  circle A3 centre (7.26, -24.191497) radius 1.2645
  line L14 (14.52, 49.818503) -> (14.52, -48.201497)
  line L15 (14.52, -48.201497) -> (0, -48.201497)
  line L16 (0, -48.201497) -> (0, 49.818503)
  line L17 (0, 49.818503) -> (14.52, 49.818503)
  arc A4 (0.01, 54.808503) -> (-4.99, 49.808503) centre (0.01, 49.808503) ccw
  arc A5 (0.01, 54.808503) -> (-4.99, 49.808503) centre (0.01, 49.808503) ccw
  line L18 (-4.99, 49.808503) -> (-4.99, -48.191497)
  arc A6 (-4.99, -48.191497) -> (0.01, -53.191497) centre (0.01, -48.191497) ccw
  line L19 (0.01, -53.191497) -> (14.51, -53.191497)
  arc A7 (14.51, -53.191497) -> (19.51, -48.191497) centre (14.51, -48.191497) ccw
  line L20 (19.51, -48.191497) -> (19.51, 49.808503)
  arc A8 (19.51, 49.808503) -> (14.51, 54.808503) centre (14.51, 49.808503) ccw
  line L21 (14.51, 54.808503) -> (0.01, 54.808503)
  line L22 (0, 54.308503) -> (14.52, 54.308503)
  arc A9 (19.01, 49.818503) -> (14.52, 54.308503) centre (14.52, 49.818503) ccw
  line L23 (19.01, 49.818503) -> (19.01, -48.201497)
  arc A10 (14.52, -52.691497) -> (19.01, -48.201497) centre (14.52, -48.201497) ccw
  line L24 (14.52, -52.691497) -> (0, -52.691497)
  arc A11 (-4.49, -48.201497) -> (0, -52.691497) centre (0, -48.201497) ccw
  line L25 (-4.49, -48.201497) -> (-4.49, 49.818503)
  arc A12 (0, 54.308503) -> (-4.49, 49.818503) centre (0, 49.818503) ccw
  line L26 (-32.359548, 57.565226) -> (20.681148, 57.565226)
  line L27 (20.681148, 57.565226) -> (20.681148, -57.434774)
  line L28 (20.681148, -57.434774) -> (-32.359548, -57.434774)
  line L29 (-32.359548, -57.434774) -> (-32.359548, 57.565226)
  point P0 (0, 0)
  point P1 (-19.910193, 0)
  point P2 (6.940853, 0.065226)
  point P3 (2.640452, 0.065226)
  dimension "d1" = 115
sketch "Sketch1 outline for Extrusion1" plane through (0, 0, 0) normal (0, 1, 0) x (-1, 0, 0)
  line L0 (-32.359548, 57.565226) -> (20.681148, 57.565226)
  line L1 (-32.359548, -57.434774) -> (-32.359548, 57.565226)
  line L2 (20.681148, 57.565226) -> (20.681148, -57.434774)
  line L3 (20.681148, -57.434774) -> (-32.359548, -57.434774)
  circle A0 centre (-19.910193, -22.5) radius 1.25
  circle A1 centre (7.26, -24.191497) radius 1.2645
  circle A2 centre (-19.910193, 22.5) radius 1.25
  circle A3 centre (7.26, 25.808503) radius 1.2645
extrude "Extrusion1" add sketch "Sketch1 outline for Extrusion1" along normal blind 3
properties part number "realsenses_plate"
